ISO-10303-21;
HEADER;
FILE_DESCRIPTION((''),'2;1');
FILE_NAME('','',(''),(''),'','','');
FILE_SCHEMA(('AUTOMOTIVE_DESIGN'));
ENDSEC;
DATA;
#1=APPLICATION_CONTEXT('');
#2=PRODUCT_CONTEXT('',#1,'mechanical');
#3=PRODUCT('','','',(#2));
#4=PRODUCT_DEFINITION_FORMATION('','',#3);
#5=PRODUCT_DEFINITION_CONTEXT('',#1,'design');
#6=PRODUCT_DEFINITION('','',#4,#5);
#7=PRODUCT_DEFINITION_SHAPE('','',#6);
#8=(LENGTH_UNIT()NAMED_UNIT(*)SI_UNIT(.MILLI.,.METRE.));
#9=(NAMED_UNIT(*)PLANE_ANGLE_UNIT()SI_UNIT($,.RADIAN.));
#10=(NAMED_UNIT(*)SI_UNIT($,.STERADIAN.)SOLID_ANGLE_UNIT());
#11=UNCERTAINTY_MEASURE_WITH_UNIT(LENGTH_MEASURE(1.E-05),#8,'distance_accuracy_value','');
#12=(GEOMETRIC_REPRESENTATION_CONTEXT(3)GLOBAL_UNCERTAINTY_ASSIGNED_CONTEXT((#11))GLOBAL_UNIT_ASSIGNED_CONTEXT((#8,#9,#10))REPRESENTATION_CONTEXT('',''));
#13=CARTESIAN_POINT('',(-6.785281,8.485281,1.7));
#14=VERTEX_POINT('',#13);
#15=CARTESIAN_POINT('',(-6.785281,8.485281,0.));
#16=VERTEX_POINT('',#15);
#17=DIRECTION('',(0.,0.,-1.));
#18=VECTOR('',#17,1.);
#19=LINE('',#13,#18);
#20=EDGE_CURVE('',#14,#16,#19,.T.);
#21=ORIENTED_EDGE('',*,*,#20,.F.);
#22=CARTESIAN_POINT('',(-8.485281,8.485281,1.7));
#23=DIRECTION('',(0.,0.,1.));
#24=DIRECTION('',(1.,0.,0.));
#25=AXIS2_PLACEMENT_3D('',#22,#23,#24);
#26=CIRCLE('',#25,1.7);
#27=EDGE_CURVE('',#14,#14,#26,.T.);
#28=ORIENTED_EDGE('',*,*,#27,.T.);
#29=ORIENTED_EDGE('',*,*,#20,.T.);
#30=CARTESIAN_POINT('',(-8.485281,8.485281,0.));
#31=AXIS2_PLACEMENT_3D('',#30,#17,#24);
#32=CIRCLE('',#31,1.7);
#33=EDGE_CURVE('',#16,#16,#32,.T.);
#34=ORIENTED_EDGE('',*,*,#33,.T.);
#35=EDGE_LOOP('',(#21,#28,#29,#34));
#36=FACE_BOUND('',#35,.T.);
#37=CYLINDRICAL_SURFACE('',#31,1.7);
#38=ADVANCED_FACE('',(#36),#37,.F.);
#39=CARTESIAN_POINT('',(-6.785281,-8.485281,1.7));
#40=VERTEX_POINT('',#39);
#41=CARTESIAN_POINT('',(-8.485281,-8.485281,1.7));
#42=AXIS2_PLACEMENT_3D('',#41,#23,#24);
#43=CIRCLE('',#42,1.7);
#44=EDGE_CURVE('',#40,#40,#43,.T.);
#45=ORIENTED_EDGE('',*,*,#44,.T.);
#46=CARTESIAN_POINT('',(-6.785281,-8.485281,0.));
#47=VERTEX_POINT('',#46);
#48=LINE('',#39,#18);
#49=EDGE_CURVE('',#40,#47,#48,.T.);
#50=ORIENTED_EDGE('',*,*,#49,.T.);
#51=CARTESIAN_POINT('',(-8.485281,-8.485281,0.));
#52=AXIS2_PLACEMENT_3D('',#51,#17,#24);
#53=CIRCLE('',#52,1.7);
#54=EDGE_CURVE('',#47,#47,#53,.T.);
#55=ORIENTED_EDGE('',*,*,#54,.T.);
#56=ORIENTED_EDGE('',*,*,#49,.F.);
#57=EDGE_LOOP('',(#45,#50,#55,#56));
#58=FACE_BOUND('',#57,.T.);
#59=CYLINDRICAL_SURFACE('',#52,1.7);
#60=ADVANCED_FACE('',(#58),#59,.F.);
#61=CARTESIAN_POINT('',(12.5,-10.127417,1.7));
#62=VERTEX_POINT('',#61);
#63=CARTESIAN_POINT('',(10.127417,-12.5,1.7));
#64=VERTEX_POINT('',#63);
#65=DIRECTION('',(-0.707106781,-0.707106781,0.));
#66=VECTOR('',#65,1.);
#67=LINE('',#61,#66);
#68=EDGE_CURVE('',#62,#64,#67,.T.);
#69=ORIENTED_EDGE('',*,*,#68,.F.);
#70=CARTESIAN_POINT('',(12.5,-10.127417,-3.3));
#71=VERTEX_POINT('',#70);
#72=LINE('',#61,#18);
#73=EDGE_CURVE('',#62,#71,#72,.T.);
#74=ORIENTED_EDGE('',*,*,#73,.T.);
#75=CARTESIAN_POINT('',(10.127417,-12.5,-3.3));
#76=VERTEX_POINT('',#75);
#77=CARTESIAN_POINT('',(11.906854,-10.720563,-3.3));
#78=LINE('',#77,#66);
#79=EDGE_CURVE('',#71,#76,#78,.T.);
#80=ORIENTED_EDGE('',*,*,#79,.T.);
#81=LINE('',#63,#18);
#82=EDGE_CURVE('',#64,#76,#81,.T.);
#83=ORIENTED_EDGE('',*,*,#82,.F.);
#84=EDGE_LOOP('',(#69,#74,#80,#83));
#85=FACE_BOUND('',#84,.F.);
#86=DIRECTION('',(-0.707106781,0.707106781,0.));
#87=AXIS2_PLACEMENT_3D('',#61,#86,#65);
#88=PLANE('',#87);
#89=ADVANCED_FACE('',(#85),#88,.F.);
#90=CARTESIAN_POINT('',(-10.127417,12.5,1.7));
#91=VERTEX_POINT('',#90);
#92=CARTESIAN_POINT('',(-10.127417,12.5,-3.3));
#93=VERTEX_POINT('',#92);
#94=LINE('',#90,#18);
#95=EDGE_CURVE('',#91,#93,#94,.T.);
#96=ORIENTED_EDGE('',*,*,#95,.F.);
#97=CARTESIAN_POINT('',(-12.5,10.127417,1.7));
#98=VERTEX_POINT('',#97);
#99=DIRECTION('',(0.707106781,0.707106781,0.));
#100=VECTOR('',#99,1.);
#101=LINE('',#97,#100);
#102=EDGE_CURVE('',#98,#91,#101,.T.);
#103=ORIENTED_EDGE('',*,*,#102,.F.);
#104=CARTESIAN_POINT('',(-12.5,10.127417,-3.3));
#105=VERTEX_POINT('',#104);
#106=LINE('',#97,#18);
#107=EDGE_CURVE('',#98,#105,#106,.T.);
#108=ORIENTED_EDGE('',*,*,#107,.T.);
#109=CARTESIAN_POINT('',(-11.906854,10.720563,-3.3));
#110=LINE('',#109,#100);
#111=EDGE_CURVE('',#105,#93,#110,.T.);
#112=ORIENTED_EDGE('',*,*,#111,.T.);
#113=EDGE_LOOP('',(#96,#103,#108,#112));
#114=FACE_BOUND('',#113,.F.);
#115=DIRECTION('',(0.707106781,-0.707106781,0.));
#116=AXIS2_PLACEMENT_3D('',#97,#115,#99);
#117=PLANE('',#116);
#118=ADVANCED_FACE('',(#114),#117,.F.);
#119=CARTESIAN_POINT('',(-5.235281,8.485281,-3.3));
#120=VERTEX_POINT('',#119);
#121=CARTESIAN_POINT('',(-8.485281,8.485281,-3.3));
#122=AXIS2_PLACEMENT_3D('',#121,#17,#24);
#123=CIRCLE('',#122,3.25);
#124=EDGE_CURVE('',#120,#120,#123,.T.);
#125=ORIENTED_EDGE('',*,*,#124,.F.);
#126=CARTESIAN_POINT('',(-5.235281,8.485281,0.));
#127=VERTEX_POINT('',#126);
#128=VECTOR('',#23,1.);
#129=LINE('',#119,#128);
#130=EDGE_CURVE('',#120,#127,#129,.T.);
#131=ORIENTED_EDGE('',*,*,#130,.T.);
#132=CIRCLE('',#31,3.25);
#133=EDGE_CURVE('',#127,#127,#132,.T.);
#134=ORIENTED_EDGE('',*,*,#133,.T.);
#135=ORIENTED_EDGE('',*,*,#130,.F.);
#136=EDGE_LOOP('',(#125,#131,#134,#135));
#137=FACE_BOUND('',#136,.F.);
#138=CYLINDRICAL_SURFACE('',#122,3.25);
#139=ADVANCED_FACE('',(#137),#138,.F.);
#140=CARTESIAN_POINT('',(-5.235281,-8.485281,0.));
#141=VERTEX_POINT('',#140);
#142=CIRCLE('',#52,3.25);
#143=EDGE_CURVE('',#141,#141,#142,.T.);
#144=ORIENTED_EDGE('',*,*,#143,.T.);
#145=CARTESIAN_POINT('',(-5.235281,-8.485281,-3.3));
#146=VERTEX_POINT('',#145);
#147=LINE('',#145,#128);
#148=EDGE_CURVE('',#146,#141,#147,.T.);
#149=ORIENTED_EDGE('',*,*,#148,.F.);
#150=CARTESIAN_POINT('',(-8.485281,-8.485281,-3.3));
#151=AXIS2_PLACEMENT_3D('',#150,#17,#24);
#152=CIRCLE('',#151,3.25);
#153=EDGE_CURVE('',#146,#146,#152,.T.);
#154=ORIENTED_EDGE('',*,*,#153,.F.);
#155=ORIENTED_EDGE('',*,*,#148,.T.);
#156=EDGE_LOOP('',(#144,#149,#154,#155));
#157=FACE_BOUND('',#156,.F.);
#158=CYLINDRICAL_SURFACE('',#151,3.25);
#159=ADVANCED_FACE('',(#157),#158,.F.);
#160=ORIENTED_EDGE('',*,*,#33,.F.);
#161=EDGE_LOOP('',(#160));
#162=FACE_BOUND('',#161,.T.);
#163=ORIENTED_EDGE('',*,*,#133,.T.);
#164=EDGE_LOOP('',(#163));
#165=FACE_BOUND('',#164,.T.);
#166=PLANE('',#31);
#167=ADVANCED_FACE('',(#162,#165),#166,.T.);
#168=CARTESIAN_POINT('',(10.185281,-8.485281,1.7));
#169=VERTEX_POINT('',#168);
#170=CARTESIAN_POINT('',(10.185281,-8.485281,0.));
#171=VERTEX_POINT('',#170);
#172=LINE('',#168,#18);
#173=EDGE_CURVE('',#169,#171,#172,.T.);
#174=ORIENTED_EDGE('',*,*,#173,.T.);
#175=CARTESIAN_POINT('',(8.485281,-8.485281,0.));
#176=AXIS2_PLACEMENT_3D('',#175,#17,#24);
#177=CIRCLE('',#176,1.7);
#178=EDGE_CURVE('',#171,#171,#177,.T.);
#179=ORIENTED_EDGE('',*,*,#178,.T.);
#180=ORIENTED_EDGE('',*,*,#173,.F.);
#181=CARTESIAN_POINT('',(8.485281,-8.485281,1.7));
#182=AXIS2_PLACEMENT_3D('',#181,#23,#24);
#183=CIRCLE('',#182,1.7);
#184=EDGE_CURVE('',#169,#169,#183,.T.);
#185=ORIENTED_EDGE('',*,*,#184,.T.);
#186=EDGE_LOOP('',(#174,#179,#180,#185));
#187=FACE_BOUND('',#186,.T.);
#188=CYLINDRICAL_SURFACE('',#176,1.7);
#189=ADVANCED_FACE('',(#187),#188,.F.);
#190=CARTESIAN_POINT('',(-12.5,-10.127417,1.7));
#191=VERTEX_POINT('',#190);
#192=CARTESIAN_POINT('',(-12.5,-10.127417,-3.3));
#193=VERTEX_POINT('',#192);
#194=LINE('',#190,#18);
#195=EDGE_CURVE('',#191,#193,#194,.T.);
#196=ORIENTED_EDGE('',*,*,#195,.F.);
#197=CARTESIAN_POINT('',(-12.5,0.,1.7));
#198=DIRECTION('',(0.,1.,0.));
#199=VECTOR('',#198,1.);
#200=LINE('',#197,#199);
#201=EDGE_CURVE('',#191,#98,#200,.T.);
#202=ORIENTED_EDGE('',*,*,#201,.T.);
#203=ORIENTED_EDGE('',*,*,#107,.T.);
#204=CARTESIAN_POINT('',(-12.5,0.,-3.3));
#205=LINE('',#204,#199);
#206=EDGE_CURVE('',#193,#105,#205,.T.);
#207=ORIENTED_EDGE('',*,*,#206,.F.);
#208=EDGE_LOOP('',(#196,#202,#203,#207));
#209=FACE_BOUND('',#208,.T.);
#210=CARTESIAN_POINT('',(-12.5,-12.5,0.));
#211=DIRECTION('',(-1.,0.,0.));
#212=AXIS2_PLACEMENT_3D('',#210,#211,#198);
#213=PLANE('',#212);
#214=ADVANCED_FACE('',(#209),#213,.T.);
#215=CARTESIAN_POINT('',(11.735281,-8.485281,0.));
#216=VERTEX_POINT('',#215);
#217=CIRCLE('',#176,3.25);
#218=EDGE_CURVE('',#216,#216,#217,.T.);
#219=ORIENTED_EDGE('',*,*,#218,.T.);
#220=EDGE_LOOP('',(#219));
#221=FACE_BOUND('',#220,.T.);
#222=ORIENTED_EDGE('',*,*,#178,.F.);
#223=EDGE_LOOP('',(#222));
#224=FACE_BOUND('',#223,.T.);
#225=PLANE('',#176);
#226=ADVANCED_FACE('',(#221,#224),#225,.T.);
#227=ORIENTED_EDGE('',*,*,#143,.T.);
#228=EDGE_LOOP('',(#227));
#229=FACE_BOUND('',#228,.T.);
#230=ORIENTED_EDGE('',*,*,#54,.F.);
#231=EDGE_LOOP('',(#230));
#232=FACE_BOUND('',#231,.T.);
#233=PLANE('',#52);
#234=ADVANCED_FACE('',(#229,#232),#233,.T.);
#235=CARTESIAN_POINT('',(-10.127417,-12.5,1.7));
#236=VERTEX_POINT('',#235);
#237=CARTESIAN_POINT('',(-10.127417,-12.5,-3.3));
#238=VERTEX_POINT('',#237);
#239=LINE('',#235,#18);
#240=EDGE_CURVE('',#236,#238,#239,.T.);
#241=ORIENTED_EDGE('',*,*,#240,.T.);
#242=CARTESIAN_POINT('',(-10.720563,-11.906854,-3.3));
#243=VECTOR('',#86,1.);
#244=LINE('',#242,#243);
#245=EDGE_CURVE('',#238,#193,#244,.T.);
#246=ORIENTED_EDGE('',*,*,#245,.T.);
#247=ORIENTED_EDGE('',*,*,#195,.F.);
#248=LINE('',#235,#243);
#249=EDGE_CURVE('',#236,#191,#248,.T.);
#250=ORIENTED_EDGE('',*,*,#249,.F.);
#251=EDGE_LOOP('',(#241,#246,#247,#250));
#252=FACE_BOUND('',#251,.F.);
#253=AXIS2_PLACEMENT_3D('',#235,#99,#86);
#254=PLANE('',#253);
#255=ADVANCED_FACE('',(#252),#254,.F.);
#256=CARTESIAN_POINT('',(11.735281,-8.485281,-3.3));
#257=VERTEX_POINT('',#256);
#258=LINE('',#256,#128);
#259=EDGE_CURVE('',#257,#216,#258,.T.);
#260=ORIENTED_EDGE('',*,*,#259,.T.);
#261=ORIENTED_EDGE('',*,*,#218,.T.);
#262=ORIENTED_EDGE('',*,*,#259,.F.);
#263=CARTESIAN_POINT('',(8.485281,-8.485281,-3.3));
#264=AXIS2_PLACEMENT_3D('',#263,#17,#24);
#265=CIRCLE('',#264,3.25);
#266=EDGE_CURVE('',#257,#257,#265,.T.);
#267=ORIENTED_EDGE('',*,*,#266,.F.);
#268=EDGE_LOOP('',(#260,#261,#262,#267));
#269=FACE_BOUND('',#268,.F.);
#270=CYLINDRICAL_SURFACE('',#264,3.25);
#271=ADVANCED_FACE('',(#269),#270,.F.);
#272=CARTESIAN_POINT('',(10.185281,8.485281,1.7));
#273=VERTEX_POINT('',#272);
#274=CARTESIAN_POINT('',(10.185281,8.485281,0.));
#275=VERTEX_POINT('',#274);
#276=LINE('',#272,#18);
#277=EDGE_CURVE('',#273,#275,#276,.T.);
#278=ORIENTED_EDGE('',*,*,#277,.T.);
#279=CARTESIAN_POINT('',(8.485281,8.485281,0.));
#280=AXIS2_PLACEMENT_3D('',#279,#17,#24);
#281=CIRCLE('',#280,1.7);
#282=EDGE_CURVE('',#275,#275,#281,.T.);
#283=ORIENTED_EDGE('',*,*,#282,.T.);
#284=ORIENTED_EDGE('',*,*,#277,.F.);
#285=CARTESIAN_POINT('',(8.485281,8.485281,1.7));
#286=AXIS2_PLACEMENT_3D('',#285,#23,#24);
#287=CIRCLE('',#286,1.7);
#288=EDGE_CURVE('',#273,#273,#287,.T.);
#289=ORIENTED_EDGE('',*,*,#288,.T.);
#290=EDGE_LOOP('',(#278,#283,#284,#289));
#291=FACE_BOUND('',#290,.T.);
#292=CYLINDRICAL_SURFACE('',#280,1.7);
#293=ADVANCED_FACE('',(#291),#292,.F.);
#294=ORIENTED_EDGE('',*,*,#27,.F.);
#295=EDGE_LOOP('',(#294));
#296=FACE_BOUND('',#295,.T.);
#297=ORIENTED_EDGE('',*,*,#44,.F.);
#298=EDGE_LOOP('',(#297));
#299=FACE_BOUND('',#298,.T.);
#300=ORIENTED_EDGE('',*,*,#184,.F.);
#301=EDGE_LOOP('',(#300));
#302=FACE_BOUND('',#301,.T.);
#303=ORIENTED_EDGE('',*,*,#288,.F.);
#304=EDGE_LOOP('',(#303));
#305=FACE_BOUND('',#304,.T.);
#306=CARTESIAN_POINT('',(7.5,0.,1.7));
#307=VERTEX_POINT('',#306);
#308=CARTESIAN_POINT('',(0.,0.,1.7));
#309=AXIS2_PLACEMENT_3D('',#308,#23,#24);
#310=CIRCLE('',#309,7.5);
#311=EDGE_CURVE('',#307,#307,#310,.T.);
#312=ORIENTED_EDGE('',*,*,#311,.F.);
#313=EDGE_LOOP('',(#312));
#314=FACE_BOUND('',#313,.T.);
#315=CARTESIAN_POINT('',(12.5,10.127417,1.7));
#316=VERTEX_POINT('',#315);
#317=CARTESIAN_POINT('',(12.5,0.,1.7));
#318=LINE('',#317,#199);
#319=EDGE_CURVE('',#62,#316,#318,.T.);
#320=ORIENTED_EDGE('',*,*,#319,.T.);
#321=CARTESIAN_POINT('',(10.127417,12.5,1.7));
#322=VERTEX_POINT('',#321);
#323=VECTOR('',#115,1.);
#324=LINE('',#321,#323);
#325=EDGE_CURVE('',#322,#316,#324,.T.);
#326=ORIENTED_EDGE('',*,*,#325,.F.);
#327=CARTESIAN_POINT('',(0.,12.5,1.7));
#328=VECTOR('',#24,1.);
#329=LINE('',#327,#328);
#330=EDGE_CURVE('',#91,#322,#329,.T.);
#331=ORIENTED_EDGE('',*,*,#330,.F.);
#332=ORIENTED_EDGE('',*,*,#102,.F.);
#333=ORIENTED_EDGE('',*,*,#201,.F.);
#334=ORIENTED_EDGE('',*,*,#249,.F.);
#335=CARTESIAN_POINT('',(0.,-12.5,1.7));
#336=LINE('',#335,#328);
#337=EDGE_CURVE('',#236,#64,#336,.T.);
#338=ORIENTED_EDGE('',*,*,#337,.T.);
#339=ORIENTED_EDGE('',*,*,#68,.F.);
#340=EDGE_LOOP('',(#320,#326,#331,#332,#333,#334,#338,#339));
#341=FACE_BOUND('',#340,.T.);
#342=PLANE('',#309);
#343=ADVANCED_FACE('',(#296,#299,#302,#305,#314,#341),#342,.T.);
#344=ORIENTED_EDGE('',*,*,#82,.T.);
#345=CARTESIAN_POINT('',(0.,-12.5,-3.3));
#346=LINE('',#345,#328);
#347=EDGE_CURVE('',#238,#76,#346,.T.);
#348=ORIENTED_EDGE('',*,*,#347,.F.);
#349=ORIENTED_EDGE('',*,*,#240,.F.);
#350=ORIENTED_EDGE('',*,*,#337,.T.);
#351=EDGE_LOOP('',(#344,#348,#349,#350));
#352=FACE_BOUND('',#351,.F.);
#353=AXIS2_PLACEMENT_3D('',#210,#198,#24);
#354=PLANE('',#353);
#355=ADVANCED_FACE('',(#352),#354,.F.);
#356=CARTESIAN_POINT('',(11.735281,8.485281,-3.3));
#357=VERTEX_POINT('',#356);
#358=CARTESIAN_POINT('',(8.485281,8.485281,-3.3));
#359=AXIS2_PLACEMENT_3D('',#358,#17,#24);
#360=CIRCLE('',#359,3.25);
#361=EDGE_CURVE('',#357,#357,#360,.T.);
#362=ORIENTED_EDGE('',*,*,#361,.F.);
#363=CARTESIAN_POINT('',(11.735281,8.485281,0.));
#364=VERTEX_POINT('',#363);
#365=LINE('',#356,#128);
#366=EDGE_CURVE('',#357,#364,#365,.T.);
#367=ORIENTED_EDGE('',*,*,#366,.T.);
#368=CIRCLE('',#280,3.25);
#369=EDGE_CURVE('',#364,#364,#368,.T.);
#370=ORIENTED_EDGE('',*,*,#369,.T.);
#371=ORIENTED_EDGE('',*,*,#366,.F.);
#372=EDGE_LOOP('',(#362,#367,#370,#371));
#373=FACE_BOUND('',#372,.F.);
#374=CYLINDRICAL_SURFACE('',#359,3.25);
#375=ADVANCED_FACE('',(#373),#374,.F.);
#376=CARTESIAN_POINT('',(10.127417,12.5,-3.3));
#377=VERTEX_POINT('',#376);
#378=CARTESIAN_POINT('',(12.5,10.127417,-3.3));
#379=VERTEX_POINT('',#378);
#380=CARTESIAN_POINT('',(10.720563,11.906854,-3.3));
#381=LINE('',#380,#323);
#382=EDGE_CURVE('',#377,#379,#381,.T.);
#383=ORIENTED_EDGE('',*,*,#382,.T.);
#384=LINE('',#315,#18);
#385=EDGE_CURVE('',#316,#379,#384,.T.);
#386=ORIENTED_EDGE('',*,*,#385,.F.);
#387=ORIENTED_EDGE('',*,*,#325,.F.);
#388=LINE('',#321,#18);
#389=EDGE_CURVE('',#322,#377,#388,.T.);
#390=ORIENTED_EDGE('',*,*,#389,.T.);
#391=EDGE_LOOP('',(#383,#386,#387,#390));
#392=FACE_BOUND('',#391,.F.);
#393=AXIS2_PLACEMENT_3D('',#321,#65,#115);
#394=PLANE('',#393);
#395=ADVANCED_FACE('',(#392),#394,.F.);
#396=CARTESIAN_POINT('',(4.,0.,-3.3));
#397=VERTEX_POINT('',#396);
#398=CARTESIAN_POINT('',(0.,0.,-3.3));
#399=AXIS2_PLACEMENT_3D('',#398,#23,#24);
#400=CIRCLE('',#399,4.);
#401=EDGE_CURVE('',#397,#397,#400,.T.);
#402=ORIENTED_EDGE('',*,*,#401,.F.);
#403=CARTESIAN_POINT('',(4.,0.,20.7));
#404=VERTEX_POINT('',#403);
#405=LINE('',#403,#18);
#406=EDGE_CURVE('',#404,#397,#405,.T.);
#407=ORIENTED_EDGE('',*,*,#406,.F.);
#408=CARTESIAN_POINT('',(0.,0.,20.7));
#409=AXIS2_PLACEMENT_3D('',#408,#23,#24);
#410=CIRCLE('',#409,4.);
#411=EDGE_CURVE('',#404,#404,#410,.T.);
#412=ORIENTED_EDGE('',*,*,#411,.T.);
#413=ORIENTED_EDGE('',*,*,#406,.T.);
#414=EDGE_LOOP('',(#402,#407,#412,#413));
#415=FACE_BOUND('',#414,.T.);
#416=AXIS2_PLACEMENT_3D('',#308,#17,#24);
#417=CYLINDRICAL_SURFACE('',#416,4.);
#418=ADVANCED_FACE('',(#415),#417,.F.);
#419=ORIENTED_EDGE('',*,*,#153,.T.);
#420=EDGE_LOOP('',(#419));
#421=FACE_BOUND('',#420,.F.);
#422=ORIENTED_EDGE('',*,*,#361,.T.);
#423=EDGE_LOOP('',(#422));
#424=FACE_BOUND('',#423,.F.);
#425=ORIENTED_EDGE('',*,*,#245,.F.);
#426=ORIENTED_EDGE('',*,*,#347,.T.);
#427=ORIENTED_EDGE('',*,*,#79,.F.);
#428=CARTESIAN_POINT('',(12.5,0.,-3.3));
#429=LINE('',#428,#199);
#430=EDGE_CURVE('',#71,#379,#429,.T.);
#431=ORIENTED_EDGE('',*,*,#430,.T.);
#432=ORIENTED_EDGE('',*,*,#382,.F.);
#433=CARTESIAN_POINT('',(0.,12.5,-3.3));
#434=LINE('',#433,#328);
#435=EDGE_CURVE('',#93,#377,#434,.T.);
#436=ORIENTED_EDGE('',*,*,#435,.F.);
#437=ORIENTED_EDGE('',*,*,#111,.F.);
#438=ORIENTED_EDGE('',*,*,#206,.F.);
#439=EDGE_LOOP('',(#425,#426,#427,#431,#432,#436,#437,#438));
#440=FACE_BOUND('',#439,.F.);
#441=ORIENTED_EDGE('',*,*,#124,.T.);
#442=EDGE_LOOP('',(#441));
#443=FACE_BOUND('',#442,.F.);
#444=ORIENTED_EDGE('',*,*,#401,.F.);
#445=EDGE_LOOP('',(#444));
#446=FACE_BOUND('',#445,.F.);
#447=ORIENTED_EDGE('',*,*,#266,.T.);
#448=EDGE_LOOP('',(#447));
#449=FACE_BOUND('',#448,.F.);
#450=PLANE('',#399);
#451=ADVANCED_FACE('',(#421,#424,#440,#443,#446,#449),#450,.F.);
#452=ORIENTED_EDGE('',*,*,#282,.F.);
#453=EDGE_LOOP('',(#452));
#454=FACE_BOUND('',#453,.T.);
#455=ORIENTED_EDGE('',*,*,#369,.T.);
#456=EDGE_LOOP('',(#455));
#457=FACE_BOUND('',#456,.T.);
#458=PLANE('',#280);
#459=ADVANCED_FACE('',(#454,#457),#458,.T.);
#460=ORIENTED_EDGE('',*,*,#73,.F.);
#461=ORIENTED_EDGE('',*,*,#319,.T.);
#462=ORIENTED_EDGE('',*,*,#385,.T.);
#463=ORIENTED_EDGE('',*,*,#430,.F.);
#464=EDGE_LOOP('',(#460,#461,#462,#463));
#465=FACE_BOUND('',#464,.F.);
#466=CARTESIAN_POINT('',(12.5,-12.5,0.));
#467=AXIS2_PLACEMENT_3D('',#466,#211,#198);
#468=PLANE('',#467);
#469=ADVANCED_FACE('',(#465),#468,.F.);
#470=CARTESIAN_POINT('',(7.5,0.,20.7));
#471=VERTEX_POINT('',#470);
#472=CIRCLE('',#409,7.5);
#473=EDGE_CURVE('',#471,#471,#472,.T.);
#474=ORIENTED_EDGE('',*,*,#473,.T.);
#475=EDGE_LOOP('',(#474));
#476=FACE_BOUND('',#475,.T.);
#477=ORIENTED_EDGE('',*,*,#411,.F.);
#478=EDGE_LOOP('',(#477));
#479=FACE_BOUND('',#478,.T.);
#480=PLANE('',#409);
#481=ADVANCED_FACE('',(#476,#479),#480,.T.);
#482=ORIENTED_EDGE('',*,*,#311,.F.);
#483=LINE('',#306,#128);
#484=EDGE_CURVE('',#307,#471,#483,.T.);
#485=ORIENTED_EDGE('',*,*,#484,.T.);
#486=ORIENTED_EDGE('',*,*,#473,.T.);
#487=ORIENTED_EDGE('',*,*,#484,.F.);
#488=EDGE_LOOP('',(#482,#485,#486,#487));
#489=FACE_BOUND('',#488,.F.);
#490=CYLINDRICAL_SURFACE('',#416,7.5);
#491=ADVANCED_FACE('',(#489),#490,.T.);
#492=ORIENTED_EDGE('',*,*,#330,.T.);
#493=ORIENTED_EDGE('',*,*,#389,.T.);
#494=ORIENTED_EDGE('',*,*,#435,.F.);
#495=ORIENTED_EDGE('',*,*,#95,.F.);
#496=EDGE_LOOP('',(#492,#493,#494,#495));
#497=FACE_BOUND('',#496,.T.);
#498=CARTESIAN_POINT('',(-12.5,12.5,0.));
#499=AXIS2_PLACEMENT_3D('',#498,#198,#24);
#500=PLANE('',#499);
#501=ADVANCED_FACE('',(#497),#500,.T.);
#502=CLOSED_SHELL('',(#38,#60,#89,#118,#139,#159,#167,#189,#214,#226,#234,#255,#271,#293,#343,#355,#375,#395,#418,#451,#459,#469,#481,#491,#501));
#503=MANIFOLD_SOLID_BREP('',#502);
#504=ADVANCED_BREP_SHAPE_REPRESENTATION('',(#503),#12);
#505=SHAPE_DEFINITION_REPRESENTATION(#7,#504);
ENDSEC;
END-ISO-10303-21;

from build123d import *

# Parameters (mm, degrees)
F0_W     = 25
F0_H     = 25
F0_R     = 1.7
F0_R_2   = 7.5
F0_R_3   = 4
F1_DEPTH = 3.3
F2_DEPTH = 1.7
F3_R     = 7.5
F3_R_2   = 4
F4_DEPTH = 19
F6_DEPTH = 25
F7_R     = 3.25
F7_R_2   = 1.7
F8_DEPTH = 3.3


# Not quite as in the source:
# - a feature names something its author has since deleted; it is built from what else it names


with BuildPart() as f1:
    # F0 (on Top) → F1 (new body)
    with BuildSketch(Plane.XY):
        Rectangle(F0_W, F0_H)
        with Locations((-8.4852813742, -8.4852813742)):
            Circle(F0_R, mode=Mode.SUBTRACT)
        with Locations((8.4852813742, -8.4852813742)):
            Circle(F0_R, mode=Mode.SUBTRACT)
        with Locations((-8.4852813742, 8.4852813742)):
            Circle(F0_R, mode=Mode.SUBTRACT)
        Circle(F0_R_2, mode=Mode.SUBTRACT)
        with Locations((8.4852813742, 8.4852813742)):
            Circle(F0_R, mode=Mode.SUBTRACT)
        Circle(F0_R_2)
        Circle(F0_R_3, mode=Mode.SUBTRACT)
    extrude(amount=-F1_DEPTH)

    # F0 (on Top) → F2 (join)
    with BuildSketch(Plane.XY):
        Rectangle(F0_W, F0_H)
        with Locations((-8.4852813742, -8.4852813742)):
            Circle(F0_R, mode=Mode.SUBTRACT)
        with Locations((8.4852813742, -8.4852813742)):
            Circle(F0_R, mode=Mode.SUBTRACT)
        with Locations((-8.4852813742, 8.4852813742)):
            Circle(F0_R, mode=Mode.SUBTRACT)
        Circle(F0_R_2, mode=Mode.SUBTRACT)
        with Locations((8.4852813742, 8.4852813742)):
            Circle(F0_R, mode=Mode.SUBTRACT)
        Circle(F0_R_2)
        Circle(F0_R_3, mode=Mode.SUBTRACT)
    extrude(amount=F2_DEPTH)

    # F3 (on face) → F4 (join)
    with BuildSketch(Plane.XY.offset(1.7)):
        Circle(F3_R)
        Circle(F3_R_2, mode=Mode.SUBTRACT)
    extrude(amount=F4_DEPTH)

    # F5 (on face) → F6 (cut)
    with BuildSketch(Plane.XY.offset(1.7)):
        Polygon((-12.5, 12.5), (-12.5, 10.127416998), (-10.127416998, 12.5), align=None)
        Polygon((-10.127416998, -12.5), (-12.5, -10.127416998), (-12.5, -12.5), align=None)
        Polygon((12.5, -10.127416998), (10.127416998, -12.5), (12.5, -12.5), align=None)
        Polygon((12.5, 12.5), (10.127416998, 12.5), (12.5, 10.127416998), align=None)
    extrude(amount=-F6_DEPTH, mode=Mode.SUBTRACT)

    # F7 (on face) → F8 (cut)
    with BuildSketch(Plane(origin=(0, 0, -3.3), x_dir=(1, 0, 0), z_dir=(0, 0, -1))):
        with Locations((-8.4852813742, 8.4852813742)):
            Circle(F7_R)
        with Locations((-8.4852813742, 8.4852813742)):
            Circle(F7_R_2, mode=Mode.SUBTRACT)
        with Locations((8.4852813742, 8.4852813742)):
            Circle(F7_R)
        with Locations((8.4852813742, 8.4852813742)):
            Circle(F7_R_2, mode=Mode.SUBTRACT)
        with Locations((-8.4852813742, -8.4852813742)):
            Circle(F7_R)
        with Locations((-8.4852813742, -8.4852813742)):
            Circle(F7_R_2, mode=Mode.SUBTRACT)
        with Locations((8.4852813742, -8.4852813742)):
            Circle(F7_R)
        with Locations((8.4852813742, -8.4852813742)):
            Circle(F7_R_2, mode=Mode.SUBTRACT)
    extrude(amount=-F8_DEPTH, mode=Mode.SUBTRACT)


solid = f1.part
